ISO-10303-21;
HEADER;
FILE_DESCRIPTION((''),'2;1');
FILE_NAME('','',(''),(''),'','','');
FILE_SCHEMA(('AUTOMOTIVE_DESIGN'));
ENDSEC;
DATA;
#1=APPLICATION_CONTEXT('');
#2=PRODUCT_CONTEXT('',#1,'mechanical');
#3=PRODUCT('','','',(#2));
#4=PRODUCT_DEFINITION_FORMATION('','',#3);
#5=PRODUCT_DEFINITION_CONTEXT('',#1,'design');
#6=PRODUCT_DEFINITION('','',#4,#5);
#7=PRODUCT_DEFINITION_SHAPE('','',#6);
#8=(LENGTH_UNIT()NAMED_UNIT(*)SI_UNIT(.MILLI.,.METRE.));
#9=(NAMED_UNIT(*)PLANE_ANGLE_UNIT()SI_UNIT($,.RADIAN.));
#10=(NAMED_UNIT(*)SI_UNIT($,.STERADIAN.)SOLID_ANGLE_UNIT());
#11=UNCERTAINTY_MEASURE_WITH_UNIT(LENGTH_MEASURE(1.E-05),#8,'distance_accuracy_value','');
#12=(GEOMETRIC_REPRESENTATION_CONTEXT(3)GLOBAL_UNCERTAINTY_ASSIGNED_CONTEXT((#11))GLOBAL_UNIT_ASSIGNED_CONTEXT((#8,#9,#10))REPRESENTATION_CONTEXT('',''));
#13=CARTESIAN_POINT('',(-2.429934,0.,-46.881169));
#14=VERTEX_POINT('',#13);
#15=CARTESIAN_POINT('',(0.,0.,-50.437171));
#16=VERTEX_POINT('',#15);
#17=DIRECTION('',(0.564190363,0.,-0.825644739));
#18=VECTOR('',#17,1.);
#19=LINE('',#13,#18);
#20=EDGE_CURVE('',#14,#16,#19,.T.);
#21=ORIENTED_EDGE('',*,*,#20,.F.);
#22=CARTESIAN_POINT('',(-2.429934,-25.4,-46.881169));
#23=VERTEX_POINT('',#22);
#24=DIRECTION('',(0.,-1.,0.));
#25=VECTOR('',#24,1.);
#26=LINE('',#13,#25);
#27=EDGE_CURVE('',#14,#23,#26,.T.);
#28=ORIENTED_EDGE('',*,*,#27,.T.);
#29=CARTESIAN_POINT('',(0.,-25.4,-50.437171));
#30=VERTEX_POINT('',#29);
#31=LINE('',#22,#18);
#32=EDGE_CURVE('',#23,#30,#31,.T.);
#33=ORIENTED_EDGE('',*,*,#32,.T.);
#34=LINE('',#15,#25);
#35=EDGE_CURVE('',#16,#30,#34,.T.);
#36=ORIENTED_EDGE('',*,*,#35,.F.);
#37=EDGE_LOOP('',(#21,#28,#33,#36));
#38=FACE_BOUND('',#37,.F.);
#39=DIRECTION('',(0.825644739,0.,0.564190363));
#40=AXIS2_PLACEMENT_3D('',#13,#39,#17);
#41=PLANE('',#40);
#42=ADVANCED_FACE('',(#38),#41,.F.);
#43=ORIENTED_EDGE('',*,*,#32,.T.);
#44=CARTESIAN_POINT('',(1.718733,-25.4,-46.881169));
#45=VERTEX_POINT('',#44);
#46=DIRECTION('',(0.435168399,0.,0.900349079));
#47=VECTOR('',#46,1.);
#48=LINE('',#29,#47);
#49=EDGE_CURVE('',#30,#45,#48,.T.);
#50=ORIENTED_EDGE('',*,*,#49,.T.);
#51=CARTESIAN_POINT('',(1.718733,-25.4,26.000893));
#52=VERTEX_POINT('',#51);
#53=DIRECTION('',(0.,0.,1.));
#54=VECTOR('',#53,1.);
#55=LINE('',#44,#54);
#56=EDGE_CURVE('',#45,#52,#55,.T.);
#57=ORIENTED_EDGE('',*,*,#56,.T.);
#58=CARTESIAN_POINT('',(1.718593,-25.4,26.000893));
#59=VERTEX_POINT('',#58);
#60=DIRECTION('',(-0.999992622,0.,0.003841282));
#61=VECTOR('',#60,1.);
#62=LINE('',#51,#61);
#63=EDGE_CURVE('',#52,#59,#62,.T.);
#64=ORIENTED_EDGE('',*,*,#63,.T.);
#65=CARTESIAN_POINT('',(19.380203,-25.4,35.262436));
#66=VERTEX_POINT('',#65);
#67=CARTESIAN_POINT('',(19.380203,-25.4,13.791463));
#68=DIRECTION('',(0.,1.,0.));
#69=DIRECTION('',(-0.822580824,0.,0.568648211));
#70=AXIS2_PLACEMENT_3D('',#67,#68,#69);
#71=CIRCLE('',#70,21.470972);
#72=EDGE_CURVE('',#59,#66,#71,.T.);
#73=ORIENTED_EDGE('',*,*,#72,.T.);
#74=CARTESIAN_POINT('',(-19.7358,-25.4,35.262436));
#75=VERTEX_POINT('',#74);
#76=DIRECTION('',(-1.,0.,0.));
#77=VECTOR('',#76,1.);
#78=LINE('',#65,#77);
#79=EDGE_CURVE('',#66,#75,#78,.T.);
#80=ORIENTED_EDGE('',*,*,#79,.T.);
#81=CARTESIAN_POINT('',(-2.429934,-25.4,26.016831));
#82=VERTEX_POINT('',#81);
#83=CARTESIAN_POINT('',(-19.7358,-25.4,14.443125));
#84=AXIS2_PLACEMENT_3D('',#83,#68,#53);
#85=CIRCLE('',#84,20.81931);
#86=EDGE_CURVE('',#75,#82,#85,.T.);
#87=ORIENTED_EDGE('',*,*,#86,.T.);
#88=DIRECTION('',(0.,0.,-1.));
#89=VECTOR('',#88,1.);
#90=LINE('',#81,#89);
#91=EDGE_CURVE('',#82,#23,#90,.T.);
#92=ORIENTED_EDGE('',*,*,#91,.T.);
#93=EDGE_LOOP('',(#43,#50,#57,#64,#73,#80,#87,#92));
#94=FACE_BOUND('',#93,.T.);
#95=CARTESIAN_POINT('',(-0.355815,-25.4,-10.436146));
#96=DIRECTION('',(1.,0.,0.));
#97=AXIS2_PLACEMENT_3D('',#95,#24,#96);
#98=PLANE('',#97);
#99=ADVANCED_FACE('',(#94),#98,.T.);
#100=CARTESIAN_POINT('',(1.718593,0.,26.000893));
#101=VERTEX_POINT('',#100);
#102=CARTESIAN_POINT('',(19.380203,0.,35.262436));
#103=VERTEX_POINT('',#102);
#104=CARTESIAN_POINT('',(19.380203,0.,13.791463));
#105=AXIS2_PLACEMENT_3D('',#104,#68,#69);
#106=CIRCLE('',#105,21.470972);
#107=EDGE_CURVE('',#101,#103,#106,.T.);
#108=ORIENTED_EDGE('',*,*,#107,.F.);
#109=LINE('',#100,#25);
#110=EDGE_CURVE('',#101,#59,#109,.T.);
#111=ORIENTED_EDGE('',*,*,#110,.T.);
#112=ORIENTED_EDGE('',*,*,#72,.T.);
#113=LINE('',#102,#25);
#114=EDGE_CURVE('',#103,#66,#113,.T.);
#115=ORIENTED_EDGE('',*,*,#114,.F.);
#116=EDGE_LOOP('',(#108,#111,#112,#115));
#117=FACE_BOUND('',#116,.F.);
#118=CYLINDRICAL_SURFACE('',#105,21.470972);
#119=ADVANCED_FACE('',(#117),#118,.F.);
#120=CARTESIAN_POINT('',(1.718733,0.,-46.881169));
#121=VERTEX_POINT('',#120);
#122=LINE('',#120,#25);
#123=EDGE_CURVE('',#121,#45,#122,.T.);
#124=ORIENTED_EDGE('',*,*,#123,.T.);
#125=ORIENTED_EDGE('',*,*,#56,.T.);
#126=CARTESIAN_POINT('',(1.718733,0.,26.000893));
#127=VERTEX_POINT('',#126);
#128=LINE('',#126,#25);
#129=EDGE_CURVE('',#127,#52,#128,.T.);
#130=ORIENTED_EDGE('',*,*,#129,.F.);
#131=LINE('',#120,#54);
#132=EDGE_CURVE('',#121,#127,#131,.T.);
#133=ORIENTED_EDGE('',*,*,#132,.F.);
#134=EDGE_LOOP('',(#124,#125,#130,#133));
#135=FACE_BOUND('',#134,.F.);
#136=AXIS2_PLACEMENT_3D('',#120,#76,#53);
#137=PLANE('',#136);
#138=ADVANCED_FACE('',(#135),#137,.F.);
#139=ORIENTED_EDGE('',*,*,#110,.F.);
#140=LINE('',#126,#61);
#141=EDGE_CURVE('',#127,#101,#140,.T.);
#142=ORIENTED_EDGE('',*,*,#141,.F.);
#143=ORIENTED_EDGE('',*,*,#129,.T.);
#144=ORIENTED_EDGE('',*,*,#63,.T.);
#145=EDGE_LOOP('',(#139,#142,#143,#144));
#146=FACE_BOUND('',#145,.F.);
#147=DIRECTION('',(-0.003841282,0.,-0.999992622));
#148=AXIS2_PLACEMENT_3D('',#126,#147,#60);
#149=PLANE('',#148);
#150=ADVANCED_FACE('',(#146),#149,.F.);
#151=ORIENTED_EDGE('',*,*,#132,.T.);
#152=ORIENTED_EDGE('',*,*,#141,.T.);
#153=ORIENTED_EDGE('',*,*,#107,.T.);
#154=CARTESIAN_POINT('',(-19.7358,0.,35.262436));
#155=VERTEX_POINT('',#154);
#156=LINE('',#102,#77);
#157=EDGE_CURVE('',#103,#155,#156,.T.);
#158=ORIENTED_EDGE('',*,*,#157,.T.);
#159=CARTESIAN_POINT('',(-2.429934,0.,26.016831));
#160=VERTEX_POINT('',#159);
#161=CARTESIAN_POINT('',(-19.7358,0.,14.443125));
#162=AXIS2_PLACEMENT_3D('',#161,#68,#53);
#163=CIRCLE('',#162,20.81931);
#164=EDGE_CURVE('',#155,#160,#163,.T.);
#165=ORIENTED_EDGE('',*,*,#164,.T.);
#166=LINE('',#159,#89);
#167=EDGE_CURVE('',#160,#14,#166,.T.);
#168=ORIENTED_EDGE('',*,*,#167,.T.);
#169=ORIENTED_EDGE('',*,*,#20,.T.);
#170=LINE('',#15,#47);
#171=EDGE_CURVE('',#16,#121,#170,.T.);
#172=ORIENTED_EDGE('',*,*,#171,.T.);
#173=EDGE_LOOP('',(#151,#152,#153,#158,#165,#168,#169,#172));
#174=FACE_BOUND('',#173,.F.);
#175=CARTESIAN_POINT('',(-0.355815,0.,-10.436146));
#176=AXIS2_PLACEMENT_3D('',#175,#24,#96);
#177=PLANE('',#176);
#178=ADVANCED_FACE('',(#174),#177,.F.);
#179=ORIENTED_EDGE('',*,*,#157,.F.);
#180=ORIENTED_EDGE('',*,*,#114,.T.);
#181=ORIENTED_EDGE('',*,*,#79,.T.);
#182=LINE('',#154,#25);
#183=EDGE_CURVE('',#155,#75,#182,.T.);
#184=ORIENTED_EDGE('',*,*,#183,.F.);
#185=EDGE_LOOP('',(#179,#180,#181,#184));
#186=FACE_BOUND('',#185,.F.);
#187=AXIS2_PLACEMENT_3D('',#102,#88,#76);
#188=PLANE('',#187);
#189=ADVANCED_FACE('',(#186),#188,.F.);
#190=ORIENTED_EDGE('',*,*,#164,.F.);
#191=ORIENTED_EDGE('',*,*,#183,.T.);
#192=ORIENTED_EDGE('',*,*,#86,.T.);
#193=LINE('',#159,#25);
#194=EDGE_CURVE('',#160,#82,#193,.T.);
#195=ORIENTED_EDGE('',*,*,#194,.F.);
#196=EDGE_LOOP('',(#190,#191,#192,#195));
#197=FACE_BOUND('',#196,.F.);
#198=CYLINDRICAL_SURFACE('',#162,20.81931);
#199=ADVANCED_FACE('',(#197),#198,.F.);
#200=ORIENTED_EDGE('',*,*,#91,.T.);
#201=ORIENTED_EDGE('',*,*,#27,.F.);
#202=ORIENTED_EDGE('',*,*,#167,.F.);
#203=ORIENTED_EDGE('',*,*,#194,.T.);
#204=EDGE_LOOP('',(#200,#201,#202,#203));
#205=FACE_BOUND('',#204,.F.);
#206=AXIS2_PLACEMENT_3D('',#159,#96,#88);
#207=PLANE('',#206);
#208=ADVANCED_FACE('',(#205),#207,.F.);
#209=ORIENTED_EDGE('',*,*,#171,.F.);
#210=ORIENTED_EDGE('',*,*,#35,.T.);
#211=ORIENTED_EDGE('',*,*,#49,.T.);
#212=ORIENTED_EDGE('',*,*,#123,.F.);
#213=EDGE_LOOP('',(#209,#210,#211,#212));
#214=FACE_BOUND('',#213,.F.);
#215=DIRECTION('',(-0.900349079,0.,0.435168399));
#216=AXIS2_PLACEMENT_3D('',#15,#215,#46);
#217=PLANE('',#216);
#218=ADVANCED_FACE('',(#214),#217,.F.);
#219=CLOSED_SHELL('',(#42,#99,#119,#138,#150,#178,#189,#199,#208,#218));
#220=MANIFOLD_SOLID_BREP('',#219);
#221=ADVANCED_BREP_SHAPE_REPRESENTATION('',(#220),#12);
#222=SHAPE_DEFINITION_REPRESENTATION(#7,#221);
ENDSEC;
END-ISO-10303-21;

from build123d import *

# Parameters (mm, degrees)
F1_DEPTH = 25.4


# Not quite as in the source:
# - ends of sketch curves that miss each other by under 0.0002 mm in the source are joined


with BuildPart() as f1:
    # F0 (on Front) → F1 (new body)
    with BuildSketch(Plane.XZ):
        Polygon((-2.4299337529, 26.016831398), (-2.4299337529, -46.8811690807), (1.718732994, -46.8811690807), (1.718732994, 26.0008927435), (1.7185925992, 26.0008932828), align=None)
        Polygon((1.718732994, -46.8811690807), (-2.4299337529, -46.8811690807), (0, -50.4371710122), align=None)
        with BuildLine():
            ThreePointArc((-19.7358001024, 35.2624356747), (-9.9254202862, 32.8061351822), (-2.4299337529, 26.016831398))
            Line((-2.4299337529, 26.016831398), (1.7185925992, 26.0008932828))
            ThreePointArc((1.7185925992, 26.0008932828), (9.4088856226, 32.8066016945), (19.3802025169, 35.2624356747))
            Line((19.3802025169, 35.2624356747), (-19.7358001024, 35.2624356747))
        make_face()
    extrude(amount=F1_DEPTH)


solid = f1.part
